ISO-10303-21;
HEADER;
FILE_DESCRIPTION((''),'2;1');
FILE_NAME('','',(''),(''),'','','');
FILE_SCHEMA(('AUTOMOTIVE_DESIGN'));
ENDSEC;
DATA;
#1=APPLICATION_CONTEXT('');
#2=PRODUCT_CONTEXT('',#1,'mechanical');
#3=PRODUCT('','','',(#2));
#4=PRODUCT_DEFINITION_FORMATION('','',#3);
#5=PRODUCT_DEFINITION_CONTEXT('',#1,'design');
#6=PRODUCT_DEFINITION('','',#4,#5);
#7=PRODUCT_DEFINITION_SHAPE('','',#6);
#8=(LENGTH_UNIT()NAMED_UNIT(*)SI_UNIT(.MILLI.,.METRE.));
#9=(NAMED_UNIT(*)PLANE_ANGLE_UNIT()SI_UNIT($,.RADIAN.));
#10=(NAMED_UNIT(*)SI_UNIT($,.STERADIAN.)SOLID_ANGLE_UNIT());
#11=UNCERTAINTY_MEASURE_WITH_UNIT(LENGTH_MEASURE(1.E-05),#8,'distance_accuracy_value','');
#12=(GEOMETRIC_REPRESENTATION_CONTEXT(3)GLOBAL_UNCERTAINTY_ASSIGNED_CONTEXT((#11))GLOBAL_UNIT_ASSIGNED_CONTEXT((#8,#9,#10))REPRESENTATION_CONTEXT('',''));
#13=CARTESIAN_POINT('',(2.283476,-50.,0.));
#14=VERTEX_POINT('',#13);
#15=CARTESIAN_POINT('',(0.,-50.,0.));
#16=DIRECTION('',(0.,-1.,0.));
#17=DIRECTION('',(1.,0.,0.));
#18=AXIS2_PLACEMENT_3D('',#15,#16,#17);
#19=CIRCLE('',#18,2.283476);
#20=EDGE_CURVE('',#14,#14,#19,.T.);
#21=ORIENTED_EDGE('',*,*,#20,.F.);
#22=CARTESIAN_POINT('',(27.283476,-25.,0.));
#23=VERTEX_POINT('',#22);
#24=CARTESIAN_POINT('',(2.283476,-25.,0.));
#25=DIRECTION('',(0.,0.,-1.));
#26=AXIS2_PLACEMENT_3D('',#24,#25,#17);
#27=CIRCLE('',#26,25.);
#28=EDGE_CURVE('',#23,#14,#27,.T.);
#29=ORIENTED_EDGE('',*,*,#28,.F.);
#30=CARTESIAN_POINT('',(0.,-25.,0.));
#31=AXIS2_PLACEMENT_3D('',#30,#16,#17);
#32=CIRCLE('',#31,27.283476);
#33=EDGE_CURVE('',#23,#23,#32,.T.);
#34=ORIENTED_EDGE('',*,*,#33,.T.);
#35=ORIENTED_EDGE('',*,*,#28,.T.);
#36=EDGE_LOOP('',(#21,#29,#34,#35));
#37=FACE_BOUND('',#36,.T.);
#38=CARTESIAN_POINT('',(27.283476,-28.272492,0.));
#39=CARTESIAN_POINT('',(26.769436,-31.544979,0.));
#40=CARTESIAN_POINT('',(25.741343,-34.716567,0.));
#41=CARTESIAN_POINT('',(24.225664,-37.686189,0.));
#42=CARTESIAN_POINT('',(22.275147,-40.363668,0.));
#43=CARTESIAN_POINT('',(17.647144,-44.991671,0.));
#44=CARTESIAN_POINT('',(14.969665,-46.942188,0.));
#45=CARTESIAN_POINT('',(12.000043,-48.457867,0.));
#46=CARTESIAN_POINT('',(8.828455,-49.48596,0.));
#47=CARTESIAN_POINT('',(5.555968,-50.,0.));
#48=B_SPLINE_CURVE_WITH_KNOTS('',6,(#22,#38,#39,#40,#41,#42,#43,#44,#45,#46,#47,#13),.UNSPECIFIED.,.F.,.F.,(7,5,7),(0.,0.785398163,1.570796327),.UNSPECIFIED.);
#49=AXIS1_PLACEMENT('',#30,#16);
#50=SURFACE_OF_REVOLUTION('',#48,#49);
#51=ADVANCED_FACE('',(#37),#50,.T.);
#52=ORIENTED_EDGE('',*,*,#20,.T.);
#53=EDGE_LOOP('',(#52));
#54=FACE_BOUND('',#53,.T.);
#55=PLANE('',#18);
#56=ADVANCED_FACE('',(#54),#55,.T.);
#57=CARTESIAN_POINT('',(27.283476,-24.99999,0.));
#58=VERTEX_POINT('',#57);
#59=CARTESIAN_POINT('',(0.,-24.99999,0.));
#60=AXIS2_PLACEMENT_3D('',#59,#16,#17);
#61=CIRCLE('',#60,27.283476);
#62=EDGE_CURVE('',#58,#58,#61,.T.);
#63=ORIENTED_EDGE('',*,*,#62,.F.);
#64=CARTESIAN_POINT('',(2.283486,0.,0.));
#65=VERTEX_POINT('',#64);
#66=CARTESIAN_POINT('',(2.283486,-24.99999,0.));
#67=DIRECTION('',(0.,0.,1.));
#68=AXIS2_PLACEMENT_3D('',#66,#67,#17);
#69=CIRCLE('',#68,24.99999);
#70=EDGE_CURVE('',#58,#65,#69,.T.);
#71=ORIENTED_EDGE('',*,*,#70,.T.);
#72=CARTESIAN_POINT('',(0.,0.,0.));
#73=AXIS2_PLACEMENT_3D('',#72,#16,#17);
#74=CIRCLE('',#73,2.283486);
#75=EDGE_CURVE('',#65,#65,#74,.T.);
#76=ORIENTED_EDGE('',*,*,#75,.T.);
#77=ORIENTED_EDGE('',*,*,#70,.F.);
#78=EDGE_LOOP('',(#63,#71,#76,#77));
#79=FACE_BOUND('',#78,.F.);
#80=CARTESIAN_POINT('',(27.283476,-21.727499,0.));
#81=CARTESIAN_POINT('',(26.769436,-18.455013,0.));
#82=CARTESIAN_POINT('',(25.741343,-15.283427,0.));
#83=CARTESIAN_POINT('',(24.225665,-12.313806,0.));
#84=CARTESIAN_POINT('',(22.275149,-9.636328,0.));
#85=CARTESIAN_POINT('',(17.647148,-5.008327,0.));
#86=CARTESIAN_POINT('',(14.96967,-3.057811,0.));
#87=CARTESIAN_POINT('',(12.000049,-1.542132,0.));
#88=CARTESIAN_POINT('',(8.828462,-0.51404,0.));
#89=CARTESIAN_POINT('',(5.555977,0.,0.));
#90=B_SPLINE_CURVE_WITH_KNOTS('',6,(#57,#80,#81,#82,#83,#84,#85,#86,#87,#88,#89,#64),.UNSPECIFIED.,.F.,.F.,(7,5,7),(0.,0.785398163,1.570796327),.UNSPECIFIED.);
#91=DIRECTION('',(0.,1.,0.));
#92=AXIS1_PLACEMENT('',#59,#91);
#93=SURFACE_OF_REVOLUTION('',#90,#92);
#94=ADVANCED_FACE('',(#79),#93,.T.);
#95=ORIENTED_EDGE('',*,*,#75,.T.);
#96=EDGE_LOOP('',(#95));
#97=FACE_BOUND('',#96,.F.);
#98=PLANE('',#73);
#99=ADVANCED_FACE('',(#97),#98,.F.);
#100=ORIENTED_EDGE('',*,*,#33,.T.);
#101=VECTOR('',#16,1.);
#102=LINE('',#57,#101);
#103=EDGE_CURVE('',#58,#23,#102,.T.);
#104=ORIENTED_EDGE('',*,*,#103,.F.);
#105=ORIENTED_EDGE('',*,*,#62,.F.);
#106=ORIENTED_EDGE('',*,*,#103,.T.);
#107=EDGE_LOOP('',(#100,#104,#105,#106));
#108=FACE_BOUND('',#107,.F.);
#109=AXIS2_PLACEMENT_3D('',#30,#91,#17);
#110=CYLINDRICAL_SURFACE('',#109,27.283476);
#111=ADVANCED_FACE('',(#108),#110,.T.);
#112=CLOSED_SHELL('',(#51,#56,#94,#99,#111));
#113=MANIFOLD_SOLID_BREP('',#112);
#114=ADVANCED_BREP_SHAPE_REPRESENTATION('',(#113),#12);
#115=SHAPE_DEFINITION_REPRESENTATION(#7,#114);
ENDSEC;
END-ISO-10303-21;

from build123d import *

# Parameters (mm, degrees)
F0_R     = 27.2834758809
F1_DEPTH = 25
F2_R     = 24.99999
F3_DEPTH = 25
F4_R     = 25


# Not quite as in the source:
# - a fillet or chamfer is up to 0.001 mm smaller than in the source, because OpenCascade refuses the exact size


with BuildPart() as f1:
    # F0 (on Front) → F1 (new body)
    with BuildSketch(Plane.XZ):
        Circle(F0_R)
    extrude(amount=F1_DEPTH)

    # F2 (radius 25 in the source; OpenCascade refuses exactly that, so slightly less here)
    f2_edges = [f1.edges().sort_by_distance(p)[0] for p in [
        (-27.283476, 0, 0),
    ]]
    fillet(f2_edges, radius=F2_R)

    # F3 (add): a face of the model
    f3_faces = [f1.faces().sort_by_distance(p)[0] for p in [
        (0, -25, 0),
    ]]
    extrude(f3_faces, amount=F3_DEPTH)

    # F4
    f4_edges = [f1.edges().sort_by_distance(p)[0] for p in [
        (-27.283476, -50, 0),
    ]]
    fillet(f4_edges, radius=F4_R)


solid = f1.part
